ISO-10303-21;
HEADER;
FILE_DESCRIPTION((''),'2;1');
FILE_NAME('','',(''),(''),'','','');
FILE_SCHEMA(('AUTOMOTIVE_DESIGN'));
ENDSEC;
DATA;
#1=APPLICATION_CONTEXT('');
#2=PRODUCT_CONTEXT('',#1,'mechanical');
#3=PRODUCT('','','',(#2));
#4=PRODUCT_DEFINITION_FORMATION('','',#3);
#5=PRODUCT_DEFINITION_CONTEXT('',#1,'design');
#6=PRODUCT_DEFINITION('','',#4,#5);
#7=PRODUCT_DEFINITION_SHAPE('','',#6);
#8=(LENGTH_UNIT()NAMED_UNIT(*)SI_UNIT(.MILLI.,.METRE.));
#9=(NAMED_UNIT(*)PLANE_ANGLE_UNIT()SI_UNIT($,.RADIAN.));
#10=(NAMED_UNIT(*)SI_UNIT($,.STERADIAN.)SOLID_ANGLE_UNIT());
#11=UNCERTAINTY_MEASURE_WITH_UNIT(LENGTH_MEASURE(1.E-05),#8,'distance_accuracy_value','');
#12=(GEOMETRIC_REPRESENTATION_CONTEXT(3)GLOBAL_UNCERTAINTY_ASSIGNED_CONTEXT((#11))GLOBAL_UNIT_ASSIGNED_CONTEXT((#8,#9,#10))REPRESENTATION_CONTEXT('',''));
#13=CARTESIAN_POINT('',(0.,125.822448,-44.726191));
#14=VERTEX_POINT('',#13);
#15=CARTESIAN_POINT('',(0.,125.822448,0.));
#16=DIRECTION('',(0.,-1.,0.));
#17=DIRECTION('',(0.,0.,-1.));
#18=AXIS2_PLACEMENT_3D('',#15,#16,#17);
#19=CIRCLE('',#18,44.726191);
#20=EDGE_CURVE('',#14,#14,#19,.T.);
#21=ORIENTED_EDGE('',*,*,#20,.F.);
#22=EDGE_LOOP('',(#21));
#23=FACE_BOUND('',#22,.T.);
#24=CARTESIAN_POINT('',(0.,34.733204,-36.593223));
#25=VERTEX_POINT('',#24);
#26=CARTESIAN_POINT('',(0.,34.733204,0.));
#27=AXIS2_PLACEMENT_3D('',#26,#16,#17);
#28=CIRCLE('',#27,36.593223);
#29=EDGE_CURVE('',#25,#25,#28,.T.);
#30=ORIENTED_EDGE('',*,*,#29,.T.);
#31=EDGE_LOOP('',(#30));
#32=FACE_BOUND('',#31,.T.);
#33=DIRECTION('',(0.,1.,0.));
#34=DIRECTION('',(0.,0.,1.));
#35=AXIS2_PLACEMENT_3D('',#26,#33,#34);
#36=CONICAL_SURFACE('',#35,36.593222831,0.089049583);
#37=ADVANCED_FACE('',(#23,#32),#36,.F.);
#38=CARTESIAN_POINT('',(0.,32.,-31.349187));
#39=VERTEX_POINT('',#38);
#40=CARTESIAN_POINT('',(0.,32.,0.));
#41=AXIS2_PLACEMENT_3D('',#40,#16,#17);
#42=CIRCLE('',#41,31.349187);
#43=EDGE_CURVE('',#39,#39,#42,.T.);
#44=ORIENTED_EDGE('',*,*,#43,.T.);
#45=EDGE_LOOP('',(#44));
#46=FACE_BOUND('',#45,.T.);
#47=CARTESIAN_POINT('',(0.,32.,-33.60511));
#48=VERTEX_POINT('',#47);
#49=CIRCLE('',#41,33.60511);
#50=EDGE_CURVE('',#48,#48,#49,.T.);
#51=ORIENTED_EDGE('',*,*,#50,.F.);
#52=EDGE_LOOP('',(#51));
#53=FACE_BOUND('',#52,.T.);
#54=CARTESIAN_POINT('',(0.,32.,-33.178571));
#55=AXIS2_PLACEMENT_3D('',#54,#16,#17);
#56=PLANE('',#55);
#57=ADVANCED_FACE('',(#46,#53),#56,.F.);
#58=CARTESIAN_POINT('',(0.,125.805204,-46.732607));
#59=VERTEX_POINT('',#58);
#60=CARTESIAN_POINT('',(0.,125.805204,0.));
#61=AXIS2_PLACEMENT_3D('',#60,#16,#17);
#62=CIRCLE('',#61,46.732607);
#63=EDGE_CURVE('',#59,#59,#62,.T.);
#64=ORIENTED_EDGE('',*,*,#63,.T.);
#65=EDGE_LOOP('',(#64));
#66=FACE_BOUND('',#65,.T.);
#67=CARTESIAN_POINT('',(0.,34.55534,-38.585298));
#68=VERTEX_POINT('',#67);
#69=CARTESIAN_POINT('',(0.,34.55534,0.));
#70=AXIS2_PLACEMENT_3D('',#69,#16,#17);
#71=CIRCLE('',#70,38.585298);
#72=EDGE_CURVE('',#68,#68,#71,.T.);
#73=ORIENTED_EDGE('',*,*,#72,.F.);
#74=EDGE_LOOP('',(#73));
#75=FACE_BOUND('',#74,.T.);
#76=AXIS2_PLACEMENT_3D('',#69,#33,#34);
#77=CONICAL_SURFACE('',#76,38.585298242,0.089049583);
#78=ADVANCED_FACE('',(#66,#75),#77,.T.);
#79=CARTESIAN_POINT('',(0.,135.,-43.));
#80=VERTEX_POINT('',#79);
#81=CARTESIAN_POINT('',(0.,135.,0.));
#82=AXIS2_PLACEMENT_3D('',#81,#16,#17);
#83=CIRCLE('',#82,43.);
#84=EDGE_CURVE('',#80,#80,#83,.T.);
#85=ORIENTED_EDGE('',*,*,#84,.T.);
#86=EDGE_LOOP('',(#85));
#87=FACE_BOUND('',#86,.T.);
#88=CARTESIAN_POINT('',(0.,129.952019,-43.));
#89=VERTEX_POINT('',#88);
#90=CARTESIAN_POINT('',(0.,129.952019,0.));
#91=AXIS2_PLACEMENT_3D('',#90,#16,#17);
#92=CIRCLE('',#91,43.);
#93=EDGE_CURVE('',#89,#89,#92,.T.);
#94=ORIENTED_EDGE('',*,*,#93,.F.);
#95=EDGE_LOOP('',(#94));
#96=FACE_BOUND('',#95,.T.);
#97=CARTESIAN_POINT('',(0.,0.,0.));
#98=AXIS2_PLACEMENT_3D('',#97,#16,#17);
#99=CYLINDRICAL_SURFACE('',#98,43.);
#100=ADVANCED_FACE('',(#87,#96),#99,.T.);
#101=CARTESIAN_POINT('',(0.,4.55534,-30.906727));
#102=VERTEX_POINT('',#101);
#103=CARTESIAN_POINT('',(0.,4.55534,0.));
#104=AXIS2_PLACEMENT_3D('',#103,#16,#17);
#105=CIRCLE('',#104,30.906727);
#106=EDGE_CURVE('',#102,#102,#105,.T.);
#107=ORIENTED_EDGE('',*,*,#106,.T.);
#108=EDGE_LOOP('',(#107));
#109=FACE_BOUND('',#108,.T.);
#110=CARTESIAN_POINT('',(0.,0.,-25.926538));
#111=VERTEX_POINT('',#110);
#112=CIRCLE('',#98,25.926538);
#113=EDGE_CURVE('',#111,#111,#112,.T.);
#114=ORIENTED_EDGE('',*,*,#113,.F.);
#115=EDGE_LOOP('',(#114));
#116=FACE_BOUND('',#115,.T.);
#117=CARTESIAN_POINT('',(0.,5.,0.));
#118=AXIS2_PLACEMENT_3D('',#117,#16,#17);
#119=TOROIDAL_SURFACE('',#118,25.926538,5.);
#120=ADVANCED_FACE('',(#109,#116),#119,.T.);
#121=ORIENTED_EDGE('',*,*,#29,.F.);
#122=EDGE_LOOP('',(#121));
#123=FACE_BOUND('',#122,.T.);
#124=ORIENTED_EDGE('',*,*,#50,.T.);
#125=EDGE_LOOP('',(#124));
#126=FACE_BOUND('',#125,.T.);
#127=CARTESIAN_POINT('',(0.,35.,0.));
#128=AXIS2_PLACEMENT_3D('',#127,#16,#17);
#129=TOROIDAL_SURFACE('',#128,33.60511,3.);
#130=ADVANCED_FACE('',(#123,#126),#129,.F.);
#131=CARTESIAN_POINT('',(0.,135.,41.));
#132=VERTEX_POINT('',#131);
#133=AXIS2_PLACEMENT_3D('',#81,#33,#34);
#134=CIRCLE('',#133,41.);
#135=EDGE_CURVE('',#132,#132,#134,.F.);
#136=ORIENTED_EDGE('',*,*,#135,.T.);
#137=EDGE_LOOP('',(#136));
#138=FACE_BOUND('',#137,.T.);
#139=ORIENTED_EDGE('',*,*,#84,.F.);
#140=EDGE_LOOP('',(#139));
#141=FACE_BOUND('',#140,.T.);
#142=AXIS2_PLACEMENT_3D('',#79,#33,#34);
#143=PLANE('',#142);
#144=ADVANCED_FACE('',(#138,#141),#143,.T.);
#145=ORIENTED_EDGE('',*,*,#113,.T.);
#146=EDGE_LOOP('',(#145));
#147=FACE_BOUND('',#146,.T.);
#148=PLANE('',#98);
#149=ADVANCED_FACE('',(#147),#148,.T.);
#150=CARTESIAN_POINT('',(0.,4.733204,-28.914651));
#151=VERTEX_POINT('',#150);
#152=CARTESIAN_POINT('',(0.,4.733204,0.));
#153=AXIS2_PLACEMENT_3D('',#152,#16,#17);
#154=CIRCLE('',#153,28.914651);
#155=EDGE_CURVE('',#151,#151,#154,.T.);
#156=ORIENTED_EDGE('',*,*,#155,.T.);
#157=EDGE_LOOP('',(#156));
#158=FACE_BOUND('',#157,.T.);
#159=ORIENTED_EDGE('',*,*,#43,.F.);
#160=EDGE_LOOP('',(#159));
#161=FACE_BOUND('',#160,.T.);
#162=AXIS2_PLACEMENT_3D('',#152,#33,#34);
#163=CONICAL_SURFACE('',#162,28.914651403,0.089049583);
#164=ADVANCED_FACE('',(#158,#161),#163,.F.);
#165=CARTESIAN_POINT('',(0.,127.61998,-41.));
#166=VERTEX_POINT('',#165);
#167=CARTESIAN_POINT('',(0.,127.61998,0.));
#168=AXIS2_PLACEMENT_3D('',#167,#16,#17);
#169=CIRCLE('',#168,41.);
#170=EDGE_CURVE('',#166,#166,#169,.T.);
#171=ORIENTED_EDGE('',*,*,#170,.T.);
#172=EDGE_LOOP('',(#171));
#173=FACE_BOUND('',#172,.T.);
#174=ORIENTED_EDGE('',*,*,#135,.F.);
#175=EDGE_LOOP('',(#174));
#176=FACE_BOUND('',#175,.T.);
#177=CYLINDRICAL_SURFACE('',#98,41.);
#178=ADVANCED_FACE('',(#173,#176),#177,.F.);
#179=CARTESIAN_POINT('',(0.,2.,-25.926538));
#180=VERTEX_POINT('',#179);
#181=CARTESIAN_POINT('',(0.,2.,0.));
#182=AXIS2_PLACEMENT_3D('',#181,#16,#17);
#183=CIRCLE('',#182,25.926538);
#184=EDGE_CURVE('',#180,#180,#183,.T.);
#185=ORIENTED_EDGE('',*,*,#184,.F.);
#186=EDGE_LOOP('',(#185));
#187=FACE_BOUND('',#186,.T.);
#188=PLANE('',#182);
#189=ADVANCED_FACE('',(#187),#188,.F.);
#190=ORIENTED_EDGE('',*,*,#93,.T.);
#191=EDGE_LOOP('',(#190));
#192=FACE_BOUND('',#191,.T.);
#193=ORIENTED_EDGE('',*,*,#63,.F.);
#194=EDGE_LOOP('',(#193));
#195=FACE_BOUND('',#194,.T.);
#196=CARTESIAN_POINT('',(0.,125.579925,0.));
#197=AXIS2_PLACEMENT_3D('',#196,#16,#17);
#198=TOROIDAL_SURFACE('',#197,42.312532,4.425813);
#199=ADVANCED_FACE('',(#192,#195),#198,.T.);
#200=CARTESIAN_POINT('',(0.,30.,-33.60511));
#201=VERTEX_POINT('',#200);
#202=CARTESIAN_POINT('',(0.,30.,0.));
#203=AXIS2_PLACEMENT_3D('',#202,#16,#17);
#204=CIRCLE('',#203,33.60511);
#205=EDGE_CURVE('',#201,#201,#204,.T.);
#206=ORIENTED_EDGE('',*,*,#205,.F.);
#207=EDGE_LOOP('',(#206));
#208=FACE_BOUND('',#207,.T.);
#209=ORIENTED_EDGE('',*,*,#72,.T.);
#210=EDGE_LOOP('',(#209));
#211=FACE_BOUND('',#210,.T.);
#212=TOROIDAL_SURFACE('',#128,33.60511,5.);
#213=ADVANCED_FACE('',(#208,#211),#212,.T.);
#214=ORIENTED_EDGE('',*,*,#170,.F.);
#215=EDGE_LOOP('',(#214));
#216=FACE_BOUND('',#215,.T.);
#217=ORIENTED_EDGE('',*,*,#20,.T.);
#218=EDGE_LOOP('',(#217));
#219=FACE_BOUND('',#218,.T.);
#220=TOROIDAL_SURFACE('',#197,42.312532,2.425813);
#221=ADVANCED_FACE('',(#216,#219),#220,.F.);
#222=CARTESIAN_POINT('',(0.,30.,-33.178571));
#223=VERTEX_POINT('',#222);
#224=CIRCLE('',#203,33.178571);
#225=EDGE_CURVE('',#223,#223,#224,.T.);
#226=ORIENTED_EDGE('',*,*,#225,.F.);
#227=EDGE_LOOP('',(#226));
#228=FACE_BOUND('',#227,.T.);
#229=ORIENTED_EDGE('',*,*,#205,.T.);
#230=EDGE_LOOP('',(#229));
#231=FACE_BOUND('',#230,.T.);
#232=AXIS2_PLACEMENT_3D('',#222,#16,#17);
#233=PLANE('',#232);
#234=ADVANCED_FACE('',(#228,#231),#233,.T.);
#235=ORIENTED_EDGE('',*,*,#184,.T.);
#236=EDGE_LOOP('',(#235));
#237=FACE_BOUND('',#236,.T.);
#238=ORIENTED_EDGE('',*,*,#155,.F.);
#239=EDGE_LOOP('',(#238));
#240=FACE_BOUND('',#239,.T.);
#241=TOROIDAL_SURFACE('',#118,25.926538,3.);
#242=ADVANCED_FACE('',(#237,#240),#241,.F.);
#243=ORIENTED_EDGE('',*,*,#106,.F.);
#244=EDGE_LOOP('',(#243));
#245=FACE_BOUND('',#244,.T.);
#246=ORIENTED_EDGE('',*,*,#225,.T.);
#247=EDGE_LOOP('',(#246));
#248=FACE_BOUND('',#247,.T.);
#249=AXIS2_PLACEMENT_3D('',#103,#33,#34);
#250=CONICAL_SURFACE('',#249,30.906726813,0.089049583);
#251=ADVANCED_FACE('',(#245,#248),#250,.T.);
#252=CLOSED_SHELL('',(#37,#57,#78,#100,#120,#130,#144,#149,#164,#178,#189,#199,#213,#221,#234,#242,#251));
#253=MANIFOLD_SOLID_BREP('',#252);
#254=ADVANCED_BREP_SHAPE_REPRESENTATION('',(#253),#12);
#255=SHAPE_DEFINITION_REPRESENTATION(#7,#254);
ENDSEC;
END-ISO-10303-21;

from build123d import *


# Read off the part's stored shape, not the designer's step: Shell1
with BuildPart() as part:
    # Sketch1 → Revolve1 (revolve)
    with BuildSketch(Plane(origin=(0, 0, 0), x_dir=(0, 0, -1), z_dir=(1, 0, 0))):
        with BuildLine():
            Line((0, 0), (25.926538287, 0))
            ThreePointArc((25.926538287, 0), (29.301201348, 1.310603135), (30.906726813, 4.55534031))
            Line((30.906726813, 4.55534031), (33.178571429, 30))
            Line((33.178571429, 30), (33.605109715, 30))
            ThreePointArc((33.605109715, 30), (36.979772776, 31.310603135), (38.585298242, 34.55534031))
            Line((38.585298242, 34.55534031), (46.732607482, 125.805203793))
            ThreePointArc((46.732607482, 125.805203793), (45.602025622, 128.540844981), (43, 129.952018505))
            Line((43, 129.952018505), (43, 135))
            Line((43, 135), (0, 135))
            Line((0, 135), (0, 0))
        make_face()
    revolve(axis=Axis((0, 0, 0), (0, 1, 0)))

    # Shell1 outline → Shell1 (revolve, cut)
    with BuildSketch(Plane.XY):
        with BuildLine():
            Line((41, 127.619980078), (41, 135))
            Line((41, 135), (0, 135))
            Line((0, 135), (0, 2))
            Line((0, 2), (25.926538287, 2))
            ThreePointArc((25.926538287, 2), (27.951336123, 2.786361881), (28.914651403, 4.733204186))
            Line((28.914651403, 4.733204186), (31.349186743, 32))
            Line((31.349186743, 32), (33.605109715, 32))
            ThreePointArc((33.605109715, 32), (35.629907552, 32.786361881), (36.593222831, 34.733204186))
            Line((36.593222831, 34.733204186), (44.726191, 125.822447676))
            ThreePointArc((44.726191, 125.822447676), (43.366524853, 127.764796691), (41, 127.619980078))
        make_face()
    revolve(axis=Axis((0, 0, 0), (0, 1, 0)), mode=Mode.SUBTRACT)


solid = part.part
